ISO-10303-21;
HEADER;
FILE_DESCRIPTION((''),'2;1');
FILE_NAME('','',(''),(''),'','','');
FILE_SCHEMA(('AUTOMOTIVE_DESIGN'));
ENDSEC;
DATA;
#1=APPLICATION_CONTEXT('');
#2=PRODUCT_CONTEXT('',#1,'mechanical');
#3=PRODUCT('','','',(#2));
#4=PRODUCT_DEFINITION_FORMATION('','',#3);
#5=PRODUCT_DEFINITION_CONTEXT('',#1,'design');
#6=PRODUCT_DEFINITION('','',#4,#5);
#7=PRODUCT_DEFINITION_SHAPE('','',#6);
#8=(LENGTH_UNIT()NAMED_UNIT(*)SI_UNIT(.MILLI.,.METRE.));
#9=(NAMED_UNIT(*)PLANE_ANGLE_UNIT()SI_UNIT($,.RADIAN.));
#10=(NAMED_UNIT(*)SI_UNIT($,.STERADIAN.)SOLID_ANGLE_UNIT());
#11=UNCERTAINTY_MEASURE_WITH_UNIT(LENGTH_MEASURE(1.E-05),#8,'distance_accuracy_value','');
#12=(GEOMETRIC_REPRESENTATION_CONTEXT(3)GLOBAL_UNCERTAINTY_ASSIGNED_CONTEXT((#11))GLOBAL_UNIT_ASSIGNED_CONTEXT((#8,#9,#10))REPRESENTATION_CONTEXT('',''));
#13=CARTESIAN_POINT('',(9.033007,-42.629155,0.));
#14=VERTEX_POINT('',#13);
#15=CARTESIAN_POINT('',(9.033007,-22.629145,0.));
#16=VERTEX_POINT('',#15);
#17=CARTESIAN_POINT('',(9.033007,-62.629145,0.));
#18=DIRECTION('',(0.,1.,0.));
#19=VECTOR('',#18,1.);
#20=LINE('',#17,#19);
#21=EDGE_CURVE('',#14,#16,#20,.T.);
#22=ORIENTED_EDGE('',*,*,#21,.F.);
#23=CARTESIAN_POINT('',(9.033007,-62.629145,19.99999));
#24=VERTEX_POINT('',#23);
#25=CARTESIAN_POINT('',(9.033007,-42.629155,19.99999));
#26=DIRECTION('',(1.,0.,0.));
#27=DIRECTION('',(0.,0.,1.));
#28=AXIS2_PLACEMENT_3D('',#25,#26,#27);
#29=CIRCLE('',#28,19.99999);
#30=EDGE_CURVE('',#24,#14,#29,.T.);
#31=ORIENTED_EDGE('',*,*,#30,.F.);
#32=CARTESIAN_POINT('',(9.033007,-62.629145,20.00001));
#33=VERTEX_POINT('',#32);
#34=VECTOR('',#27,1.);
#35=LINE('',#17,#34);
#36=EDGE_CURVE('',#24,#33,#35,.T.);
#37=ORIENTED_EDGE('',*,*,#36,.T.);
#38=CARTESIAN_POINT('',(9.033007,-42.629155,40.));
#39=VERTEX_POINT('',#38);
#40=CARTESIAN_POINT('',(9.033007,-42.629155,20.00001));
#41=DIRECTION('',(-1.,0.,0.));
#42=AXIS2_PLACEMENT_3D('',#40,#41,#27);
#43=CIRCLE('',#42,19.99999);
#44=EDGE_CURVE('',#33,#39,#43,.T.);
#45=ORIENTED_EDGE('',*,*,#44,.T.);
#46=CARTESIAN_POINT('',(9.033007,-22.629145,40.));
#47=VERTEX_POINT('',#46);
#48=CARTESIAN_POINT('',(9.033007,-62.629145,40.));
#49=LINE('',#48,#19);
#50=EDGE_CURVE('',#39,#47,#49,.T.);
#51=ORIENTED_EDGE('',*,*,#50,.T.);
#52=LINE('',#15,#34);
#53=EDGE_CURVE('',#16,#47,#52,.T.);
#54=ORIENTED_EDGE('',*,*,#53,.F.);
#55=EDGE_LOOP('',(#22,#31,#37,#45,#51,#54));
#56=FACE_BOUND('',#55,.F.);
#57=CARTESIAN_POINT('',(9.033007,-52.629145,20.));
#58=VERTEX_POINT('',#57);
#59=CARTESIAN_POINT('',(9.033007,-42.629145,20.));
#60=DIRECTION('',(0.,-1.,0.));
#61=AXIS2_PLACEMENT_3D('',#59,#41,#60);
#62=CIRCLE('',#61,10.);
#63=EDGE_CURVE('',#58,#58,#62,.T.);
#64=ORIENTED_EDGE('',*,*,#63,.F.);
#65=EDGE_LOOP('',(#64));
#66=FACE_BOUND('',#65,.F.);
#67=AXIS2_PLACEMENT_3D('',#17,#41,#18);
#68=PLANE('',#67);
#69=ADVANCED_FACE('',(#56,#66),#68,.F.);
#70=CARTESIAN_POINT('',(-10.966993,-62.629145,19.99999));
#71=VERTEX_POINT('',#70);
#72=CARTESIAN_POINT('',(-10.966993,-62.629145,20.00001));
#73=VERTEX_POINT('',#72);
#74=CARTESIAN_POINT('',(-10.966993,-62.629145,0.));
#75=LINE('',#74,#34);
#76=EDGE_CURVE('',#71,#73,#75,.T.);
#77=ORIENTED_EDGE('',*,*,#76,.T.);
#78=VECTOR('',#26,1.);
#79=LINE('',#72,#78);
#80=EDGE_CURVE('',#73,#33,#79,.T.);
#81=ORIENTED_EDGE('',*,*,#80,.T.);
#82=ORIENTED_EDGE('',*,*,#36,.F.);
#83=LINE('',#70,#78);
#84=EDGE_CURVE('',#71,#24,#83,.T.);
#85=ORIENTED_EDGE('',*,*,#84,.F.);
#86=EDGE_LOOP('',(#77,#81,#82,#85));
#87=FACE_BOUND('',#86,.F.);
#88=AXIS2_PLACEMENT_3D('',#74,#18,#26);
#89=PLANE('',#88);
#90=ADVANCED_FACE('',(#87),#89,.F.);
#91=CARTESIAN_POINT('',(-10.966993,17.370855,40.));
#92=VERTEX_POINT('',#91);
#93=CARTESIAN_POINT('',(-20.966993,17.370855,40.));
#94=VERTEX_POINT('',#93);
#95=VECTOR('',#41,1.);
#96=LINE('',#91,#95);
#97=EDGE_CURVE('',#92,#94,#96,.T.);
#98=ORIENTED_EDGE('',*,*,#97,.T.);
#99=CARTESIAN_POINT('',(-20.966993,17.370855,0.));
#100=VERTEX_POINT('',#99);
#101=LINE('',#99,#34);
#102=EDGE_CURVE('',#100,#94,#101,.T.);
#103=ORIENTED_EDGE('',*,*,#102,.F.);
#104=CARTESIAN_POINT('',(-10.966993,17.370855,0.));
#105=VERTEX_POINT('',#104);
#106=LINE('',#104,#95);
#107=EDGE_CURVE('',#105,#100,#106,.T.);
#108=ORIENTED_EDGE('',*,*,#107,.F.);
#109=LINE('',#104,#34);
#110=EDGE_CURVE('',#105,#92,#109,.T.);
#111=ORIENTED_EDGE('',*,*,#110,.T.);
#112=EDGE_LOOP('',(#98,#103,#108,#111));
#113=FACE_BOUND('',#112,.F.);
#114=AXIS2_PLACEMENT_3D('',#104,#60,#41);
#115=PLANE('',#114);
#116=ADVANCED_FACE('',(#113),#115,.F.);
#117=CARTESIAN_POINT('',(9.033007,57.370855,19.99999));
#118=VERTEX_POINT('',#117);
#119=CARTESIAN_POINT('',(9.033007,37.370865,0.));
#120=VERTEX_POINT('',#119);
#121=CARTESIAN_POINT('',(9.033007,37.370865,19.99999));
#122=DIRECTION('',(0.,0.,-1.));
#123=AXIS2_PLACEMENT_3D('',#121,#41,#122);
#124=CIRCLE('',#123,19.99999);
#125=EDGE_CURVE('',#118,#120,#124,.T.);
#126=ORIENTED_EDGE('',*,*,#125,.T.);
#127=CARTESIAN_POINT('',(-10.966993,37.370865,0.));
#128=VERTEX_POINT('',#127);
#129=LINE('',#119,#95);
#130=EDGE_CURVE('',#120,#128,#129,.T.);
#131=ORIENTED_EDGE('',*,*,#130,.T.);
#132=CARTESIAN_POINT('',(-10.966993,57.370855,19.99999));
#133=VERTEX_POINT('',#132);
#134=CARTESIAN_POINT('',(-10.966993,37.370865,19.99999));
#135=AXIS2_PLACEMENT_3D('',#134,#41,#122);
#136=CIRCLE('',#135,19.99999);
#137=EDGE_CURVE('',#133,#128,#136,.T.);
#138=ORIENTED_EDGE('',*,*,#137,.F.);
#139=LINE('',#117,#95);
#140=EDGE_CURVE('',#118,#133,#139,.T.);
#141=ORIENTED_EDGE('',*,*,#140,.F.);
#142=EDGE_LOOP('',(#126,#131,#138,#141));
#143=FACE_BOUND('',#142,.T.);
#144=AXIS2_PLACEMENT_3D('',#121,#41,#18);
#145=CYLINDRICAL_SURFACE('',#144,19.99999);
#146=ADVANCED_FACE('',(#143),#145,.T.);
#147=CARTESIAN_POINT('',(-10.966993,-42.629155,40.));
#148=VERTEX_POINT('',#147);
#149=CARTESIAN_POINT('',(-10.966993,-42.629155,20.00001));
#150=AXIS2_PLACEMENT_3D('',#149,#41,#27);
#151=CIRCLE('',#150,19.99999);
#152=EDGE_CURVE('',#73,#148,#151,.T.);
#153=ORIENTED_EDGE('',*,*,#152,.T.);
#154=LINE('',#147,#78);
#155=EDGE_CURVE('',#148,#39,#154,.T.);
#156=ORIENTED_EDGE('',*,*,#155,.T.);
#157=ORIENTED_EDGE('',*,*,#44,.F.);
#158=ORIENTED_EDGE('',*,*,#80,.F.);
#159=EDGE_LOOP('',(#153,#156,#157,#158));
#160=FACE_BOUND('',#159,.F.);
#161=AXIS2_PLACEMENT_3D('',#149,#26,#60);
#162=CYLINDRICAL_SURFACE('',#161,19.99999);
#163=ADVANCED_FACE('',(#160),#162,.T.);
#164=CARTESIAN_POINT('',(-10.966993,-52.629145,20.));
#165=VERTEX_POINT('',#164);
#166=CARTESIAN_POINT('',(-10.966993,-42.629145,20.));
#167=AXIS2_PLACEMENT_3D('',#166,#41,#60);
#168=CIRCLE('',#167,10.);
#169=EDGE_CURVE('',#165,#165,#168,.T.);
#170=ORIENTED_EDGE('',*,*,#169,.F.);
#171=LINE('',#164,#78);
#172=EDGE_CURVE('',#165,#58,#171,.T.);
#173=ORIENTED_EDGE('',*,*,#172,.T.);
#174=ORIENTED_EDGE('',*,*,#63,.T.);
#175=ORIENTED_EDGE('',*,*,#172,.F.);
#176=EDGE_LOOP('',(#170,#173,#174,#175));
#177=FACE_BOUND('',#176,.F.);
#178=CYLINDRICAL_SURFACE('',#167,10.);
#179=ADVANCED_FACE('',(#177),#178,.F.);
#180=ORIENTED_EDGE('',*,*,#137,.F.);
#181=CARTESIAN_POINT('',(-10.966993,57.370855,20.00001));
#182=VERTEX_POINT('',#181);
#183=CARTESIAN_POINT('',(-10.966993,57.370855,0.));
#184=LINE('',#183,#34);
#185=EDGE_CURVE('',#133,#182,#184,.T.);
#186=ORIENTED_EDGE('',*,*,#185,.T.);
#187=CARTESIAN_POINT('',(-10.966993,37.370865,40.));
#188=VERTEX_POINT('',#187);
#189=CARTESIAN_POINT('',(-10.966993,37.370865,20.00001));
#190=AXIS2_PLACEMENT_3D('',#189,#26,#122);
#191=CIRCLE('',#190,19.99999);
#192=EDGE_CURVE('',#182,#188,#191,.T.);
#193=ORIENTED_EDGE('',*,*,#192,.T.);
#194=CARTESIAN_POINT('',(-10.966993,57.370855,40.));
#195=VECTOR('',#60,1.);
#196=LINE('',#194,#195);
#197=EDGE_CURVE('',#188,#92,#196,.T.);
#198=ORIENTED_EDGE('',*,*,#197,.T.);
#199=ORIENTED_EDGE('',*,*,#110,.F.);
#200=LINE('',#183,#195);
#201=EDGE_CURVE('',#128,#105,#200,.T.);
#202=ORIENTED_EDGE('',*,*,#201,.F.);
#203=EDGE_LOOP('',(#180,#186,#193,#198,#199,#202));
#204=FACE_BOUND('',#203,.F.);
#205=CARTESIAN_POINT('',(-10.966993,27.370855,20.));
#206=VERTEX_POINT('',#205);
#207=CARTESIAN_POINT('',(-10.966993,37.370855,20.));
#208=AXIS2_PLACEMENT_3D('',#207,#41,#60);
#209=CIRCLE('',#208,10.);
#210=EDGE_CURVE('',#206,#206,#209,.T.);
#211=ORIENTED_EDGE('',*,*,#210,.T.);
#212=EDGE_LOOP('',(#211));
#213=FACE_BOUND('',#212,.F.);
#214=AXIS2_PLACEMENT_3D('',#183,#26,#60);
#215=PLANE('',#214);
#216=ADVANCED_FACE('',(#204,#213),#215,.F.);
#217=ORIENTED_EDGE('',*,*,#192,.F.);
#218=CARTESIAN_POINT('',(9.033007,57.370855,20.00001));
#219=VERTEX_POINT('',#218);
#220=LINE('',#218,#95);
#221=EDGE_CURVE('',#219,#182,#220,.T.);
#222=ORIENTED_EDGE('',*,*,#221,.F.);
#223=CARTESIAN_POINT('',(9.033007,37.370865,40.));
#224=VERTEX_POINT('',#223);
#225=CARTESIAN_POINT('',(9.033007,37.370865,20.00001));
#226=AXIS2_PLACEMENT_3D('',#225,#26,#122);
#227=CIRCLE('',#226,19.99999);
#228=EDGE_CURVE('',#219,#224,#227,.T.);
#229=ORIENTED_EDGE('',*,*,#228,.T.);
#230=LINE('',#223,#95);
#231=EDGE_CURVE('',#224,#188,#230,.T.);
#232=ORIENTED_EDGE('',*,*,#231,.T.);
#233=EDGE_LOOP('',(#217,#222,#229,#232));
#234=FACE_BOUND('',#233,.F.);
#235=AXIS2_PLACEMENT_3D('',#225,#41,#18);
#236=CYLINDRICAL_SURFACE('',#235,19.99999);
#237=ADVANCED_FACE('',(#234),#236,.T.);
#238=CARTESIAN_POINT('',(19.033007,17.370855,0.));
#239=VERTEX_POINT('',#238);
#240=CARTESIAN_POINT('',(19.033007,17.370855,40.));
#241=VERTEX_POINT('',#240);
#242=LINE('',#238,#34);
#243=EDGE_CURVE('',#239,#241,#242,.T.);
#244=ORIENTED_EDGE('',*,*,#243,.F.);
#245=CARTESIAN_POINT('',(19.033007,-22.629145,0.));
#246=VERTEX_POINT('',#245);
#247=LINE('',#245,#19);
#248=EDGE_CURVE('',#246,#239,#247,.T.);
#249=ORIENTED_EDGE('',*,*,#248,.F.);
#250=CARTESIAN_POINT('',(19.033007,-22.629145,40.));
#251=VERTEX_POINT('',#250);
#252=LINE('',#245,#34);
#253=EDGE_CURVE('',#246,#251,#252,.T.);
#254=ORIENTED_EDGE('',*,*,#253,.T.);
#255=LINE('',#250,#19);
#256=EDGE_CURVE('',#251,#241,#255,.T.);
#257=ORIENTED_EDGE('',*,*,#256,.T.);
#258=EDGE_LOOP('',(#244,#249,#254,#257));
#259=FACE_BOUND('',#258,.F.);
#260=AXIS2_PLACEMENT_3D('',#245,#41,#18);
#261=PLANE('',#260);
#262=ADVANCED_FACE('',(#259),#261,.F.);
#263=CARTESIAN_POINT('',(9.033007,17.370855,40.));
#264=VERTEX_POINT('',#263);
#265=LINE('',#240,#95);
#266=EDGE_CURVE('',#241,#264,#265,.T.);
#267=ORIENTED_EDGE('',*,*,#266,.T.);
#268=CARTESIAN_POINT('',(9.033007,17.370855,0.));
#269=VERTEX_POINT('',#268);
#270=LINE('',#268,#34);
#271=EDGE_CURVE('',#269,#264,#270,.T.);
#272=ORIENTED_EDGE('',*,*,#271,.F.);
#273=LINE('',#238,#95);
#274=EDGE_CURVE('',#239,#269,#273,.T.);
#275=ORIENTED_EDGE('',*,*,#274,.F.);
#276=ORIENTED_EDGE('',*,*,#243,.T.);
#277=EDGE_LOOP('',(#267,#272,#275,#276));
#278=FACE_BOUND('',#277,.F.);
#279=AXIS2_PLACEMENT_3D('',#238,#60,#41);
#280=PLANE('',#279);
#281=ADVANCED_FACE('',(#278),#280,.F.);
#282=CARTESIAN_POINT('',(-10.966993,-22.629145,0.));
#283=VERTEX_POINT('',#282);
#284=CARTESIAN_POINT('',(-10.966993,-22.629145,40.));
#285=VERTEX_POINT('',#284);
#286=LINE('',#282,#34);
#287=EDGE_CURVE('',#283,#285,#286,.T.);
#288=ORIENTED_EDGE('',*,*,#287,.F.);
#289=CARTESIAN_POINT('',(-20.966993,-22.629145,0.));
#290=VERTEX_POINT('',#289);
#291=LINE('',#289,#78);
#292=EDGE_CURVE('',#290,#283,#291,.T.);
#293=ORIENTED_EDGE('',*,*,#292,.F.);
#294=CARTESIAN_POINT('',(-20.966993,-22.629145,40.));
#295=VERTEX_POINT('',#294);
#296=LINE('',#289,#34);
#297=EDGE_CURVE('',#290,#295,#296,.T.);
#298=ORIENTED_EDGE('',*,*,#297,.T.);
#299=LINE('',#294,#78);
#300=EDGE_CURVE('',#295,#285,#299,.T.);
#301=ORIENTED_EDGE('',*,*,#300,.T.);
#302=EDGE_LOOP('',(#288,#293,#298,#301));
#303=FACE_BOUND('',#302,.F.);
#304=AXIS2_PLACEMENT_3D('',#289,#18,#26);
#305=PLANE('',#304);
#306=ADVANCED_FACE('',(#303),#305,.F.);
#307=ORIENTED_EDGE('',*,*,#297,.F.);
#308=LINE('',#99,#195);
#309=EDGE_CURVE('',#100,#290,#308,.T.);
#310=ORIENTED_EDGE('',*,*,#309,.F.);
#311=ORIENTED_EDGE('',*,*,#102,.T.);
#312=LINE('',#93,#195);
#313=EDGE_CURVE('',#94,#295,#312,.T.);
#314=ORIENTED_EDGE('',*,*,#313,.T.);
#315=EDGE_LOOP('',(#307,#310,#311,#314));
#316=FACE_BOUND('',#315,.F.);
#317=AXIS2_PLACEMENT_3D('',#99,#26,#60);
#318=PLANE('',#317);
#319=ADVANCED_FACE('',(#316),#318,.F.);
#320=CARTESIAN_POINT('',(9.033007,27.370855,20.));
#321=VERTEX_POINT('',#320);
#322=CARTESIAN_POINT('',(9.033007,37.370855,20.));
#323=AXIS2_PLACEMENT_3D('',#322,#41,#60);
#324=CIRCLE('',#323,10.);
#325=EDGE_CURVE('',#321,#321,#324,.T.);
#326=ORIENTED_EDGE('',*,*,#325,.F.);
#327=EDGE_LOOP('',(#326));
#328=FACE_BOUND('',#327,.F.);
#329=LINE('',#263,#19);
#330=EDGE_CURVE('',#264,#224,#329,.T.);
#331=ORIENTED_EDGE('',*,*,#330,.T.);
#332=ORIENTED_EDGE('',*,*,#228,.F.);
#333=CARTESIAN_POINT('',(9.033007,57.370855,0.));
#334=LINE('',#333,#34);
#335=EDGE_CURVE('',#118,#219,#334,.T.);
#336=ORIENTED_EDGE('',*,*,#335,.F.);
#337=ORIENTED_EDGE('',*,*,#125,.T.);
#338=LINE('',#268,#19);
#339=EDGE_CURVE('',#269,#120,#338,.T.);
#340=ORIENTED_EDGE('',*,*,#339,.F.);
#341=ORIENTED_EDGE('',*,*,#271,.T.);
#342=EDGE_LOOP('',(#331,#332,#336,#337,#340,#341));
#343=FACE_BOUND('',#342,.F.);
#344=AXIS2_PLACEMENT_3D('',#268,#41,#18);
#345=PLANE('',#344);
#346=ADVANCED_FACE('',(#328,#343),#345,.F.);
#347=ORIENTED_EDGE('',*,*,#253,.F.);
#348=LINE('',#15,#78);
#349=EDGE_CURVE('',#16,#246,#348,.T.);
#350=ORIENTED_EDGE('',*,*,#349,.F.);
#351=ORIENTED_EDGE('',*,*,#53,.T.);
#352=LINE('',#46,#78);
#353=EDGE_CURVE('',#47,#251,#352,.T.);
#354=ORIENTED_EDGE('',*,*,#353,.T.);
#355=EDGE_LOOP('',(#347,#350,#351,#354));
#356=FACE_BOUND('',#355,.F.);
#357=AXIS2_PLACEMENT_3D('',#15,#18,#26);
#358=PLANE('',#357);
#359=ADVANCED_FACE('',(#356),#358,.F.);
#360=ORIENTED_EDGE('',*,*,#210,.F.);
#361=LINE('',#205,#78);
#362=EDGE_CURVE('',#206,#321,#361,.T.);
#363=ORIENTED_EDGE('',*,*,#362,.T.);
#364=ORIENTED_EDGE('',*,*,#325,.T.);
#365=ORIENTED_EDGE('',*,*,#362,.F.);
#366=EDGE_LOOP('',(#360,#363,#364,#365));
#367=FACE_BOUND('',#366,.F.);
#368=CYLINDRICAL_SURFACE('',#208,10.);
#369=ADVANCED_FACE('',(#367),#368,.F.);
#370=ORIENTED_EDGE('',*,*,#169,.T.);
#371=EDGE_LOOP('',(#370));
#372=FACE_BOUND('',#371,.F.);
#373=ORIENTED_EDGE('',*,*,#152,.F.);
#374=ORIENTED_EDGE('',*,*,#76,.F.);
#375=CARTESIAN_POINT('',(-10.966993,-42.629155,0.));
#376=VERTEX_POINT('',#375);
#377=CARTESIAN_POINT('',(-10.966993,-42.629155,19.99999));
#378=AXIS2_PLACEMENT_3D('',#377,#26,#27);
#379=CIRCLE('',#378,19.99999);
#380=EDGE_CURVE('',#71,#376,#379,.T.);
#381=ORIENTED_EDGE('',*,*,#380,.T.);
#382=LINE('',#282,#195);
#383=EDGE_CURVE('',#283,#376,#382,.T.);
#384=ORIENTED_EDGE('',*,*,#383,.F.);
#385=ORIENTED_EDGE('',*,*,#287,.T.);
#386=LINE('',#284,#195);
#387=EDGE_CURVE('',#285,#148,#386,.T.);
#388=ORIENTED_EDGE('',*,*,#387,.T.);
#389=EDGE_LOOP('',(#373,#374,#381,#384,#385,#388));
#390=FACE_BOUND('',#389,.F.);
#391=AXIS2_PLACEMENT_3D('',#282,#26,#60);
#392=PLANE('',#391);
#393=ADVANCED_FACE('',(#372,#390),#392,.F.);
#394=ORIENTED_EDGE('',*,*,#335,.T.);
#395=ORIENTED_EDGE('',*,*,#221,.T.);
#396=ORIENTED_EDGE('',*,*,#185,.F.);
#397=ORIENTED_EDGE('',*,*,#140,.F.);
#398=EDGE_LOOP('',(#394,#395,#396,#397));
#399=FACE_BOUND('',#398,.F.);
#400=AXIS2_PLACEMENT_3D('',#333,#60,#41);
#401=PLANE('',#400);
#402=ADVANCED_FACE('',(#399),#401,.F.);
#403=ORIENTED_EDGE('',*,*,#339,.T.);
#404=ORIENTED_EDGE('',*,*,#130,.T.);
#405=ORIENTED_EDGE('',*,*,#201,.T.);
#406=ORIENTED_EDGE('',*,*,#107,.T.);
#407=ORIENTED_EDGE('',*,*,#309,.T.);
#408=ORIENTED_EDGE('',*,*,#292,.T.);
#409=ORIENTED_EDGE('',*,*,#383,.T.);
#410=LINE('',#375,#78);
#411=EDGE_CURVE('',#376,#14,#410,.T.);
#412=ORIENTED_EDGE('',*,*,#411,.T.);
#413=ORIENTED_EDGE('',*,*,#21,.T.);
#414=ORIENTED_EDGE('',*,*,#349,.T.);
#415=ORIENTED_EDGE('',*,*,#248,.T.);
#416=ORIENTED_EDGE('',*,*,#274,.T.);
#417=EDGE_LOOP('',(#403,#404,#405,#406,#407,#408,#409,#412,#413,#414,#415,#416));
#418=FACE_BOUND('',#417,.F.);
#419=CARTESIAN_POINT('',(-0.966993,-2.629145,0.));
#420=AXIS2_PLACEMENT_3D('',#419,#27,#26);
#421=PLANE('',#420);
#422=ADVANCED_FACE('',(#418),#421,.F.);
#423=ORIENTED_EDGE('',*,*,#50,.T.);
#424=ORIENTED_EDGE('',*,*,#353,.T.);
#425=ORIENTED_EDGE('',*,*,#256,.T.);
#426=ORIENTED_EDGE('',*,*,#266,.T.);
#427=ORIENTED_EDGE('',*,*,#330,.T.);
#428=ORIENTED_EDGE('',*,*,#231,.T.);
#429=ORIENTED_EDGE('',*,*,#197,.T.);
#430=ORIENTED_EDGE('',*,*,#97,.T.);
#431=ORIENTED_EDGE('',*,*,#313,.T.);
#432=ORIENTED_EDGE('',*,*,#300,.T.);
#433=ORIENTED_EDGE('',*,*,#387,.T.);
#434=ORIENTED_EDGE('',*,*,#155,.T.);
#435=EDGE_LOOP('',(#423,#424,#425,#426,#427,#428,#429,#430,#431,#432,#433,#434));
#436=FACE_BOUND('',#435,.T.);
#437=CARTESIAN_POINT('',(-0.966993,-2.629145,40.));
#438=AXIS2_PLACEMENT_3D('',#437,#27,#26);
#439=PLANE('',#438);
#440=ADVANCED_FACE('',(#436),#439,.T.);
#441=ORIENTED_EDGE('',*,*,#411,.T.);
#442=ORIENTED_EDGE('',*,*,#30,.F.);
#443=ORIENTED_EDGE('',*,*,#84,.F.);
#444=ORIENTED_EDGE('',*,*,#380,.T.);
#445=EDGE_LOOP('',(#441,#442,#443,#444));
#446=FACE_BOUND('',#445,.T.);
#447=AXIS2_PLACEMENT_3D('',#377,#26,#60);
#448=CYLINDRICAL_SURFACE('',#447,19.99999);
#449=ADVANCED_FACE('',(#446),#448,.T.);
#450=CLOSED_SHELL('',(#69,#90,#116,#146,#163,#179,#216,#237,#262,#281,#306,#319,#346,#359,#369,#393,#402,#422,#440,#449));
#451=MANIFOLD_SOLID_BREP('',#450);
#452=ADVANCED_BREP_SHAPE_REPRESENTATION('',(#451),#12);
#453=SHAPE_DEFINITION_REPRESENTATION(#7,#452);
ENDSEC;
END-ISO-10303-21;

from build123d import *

# Parameters (mm, degrees)
F1_DEPTH = 40
F2_R     = 19.99999
F3_R     = 10
F4_DEPTH = 20
F5_R     = 10
F6_DEPTH = 20


# Not quite as in the source:
# - a fillet or chamfer is up to 0.001 mm smaller than in the source, because OpenCascade refuses the exact size


with BuildPart() as f1:
    # F0 (on Top) → F1 (new body)
    with BuildSketch(Plane.XY):
        Polygon((-10.9669931581, 17.3708552828), (-20.9669931581, 17.3708552828), (-20.9669931581, -22.6291447172), (-10.9669931581, -22.6291447172), (-10.9669931581, -62.6291447172), (9.0330068419, -62.6291447172), (9.0330068419, -22.6291447172), (19.0330068419, -22.6291447172), (19.0330068419, 17.3708552828), (9.0330068419, 17.3708552828), (9.0330068419, 57.3708552828), (-10.9669931581, 57.3708552828), align=None)
    extrude(amount=F1_DEPTH)

    # F2 (radius 20 in the source; OpenCascade refuses exactly that, so slightly less here)
    f2_edges = [f1.edges().sort_by_distance(p)[0] for p in [
        (-0.966993, 57.370855, 0),
        (-0.966993, 57.370855, 40),
        (-0.966993, -62.629145, 40),
        (-0.966993, -62.629145, 0),
    ]]
    fillet(f2_edges, radius=F2_R)

    # F3 (on face) → F4 (cut, through all)
    with BuildSketch(Plane(origin=(-10.9669931581, 0, 0), x_dir=(0, -1, 0), z_dir=(-1, 0, 0))):
        with Locations((-37.3708552828, 20)):
            Circle(F3_R)
    extrude(amount=-F4_DEPTH, mode=Mode.SUBTRACT)

    # F5 (on face) → F6 (cut, through all)
    with BuildSketch(Plane(origin=(-10.9669931581, 0, 0), x_dir=(0, -1, 0), z_dir=(-1, 0, 0))):
        with Locations((42.6291447172, 20)):
            Circle(F5_R)
    extrude(amount=-F6_DEPTH, mode=Mode.SUBTRACT)


solid = f1.part
